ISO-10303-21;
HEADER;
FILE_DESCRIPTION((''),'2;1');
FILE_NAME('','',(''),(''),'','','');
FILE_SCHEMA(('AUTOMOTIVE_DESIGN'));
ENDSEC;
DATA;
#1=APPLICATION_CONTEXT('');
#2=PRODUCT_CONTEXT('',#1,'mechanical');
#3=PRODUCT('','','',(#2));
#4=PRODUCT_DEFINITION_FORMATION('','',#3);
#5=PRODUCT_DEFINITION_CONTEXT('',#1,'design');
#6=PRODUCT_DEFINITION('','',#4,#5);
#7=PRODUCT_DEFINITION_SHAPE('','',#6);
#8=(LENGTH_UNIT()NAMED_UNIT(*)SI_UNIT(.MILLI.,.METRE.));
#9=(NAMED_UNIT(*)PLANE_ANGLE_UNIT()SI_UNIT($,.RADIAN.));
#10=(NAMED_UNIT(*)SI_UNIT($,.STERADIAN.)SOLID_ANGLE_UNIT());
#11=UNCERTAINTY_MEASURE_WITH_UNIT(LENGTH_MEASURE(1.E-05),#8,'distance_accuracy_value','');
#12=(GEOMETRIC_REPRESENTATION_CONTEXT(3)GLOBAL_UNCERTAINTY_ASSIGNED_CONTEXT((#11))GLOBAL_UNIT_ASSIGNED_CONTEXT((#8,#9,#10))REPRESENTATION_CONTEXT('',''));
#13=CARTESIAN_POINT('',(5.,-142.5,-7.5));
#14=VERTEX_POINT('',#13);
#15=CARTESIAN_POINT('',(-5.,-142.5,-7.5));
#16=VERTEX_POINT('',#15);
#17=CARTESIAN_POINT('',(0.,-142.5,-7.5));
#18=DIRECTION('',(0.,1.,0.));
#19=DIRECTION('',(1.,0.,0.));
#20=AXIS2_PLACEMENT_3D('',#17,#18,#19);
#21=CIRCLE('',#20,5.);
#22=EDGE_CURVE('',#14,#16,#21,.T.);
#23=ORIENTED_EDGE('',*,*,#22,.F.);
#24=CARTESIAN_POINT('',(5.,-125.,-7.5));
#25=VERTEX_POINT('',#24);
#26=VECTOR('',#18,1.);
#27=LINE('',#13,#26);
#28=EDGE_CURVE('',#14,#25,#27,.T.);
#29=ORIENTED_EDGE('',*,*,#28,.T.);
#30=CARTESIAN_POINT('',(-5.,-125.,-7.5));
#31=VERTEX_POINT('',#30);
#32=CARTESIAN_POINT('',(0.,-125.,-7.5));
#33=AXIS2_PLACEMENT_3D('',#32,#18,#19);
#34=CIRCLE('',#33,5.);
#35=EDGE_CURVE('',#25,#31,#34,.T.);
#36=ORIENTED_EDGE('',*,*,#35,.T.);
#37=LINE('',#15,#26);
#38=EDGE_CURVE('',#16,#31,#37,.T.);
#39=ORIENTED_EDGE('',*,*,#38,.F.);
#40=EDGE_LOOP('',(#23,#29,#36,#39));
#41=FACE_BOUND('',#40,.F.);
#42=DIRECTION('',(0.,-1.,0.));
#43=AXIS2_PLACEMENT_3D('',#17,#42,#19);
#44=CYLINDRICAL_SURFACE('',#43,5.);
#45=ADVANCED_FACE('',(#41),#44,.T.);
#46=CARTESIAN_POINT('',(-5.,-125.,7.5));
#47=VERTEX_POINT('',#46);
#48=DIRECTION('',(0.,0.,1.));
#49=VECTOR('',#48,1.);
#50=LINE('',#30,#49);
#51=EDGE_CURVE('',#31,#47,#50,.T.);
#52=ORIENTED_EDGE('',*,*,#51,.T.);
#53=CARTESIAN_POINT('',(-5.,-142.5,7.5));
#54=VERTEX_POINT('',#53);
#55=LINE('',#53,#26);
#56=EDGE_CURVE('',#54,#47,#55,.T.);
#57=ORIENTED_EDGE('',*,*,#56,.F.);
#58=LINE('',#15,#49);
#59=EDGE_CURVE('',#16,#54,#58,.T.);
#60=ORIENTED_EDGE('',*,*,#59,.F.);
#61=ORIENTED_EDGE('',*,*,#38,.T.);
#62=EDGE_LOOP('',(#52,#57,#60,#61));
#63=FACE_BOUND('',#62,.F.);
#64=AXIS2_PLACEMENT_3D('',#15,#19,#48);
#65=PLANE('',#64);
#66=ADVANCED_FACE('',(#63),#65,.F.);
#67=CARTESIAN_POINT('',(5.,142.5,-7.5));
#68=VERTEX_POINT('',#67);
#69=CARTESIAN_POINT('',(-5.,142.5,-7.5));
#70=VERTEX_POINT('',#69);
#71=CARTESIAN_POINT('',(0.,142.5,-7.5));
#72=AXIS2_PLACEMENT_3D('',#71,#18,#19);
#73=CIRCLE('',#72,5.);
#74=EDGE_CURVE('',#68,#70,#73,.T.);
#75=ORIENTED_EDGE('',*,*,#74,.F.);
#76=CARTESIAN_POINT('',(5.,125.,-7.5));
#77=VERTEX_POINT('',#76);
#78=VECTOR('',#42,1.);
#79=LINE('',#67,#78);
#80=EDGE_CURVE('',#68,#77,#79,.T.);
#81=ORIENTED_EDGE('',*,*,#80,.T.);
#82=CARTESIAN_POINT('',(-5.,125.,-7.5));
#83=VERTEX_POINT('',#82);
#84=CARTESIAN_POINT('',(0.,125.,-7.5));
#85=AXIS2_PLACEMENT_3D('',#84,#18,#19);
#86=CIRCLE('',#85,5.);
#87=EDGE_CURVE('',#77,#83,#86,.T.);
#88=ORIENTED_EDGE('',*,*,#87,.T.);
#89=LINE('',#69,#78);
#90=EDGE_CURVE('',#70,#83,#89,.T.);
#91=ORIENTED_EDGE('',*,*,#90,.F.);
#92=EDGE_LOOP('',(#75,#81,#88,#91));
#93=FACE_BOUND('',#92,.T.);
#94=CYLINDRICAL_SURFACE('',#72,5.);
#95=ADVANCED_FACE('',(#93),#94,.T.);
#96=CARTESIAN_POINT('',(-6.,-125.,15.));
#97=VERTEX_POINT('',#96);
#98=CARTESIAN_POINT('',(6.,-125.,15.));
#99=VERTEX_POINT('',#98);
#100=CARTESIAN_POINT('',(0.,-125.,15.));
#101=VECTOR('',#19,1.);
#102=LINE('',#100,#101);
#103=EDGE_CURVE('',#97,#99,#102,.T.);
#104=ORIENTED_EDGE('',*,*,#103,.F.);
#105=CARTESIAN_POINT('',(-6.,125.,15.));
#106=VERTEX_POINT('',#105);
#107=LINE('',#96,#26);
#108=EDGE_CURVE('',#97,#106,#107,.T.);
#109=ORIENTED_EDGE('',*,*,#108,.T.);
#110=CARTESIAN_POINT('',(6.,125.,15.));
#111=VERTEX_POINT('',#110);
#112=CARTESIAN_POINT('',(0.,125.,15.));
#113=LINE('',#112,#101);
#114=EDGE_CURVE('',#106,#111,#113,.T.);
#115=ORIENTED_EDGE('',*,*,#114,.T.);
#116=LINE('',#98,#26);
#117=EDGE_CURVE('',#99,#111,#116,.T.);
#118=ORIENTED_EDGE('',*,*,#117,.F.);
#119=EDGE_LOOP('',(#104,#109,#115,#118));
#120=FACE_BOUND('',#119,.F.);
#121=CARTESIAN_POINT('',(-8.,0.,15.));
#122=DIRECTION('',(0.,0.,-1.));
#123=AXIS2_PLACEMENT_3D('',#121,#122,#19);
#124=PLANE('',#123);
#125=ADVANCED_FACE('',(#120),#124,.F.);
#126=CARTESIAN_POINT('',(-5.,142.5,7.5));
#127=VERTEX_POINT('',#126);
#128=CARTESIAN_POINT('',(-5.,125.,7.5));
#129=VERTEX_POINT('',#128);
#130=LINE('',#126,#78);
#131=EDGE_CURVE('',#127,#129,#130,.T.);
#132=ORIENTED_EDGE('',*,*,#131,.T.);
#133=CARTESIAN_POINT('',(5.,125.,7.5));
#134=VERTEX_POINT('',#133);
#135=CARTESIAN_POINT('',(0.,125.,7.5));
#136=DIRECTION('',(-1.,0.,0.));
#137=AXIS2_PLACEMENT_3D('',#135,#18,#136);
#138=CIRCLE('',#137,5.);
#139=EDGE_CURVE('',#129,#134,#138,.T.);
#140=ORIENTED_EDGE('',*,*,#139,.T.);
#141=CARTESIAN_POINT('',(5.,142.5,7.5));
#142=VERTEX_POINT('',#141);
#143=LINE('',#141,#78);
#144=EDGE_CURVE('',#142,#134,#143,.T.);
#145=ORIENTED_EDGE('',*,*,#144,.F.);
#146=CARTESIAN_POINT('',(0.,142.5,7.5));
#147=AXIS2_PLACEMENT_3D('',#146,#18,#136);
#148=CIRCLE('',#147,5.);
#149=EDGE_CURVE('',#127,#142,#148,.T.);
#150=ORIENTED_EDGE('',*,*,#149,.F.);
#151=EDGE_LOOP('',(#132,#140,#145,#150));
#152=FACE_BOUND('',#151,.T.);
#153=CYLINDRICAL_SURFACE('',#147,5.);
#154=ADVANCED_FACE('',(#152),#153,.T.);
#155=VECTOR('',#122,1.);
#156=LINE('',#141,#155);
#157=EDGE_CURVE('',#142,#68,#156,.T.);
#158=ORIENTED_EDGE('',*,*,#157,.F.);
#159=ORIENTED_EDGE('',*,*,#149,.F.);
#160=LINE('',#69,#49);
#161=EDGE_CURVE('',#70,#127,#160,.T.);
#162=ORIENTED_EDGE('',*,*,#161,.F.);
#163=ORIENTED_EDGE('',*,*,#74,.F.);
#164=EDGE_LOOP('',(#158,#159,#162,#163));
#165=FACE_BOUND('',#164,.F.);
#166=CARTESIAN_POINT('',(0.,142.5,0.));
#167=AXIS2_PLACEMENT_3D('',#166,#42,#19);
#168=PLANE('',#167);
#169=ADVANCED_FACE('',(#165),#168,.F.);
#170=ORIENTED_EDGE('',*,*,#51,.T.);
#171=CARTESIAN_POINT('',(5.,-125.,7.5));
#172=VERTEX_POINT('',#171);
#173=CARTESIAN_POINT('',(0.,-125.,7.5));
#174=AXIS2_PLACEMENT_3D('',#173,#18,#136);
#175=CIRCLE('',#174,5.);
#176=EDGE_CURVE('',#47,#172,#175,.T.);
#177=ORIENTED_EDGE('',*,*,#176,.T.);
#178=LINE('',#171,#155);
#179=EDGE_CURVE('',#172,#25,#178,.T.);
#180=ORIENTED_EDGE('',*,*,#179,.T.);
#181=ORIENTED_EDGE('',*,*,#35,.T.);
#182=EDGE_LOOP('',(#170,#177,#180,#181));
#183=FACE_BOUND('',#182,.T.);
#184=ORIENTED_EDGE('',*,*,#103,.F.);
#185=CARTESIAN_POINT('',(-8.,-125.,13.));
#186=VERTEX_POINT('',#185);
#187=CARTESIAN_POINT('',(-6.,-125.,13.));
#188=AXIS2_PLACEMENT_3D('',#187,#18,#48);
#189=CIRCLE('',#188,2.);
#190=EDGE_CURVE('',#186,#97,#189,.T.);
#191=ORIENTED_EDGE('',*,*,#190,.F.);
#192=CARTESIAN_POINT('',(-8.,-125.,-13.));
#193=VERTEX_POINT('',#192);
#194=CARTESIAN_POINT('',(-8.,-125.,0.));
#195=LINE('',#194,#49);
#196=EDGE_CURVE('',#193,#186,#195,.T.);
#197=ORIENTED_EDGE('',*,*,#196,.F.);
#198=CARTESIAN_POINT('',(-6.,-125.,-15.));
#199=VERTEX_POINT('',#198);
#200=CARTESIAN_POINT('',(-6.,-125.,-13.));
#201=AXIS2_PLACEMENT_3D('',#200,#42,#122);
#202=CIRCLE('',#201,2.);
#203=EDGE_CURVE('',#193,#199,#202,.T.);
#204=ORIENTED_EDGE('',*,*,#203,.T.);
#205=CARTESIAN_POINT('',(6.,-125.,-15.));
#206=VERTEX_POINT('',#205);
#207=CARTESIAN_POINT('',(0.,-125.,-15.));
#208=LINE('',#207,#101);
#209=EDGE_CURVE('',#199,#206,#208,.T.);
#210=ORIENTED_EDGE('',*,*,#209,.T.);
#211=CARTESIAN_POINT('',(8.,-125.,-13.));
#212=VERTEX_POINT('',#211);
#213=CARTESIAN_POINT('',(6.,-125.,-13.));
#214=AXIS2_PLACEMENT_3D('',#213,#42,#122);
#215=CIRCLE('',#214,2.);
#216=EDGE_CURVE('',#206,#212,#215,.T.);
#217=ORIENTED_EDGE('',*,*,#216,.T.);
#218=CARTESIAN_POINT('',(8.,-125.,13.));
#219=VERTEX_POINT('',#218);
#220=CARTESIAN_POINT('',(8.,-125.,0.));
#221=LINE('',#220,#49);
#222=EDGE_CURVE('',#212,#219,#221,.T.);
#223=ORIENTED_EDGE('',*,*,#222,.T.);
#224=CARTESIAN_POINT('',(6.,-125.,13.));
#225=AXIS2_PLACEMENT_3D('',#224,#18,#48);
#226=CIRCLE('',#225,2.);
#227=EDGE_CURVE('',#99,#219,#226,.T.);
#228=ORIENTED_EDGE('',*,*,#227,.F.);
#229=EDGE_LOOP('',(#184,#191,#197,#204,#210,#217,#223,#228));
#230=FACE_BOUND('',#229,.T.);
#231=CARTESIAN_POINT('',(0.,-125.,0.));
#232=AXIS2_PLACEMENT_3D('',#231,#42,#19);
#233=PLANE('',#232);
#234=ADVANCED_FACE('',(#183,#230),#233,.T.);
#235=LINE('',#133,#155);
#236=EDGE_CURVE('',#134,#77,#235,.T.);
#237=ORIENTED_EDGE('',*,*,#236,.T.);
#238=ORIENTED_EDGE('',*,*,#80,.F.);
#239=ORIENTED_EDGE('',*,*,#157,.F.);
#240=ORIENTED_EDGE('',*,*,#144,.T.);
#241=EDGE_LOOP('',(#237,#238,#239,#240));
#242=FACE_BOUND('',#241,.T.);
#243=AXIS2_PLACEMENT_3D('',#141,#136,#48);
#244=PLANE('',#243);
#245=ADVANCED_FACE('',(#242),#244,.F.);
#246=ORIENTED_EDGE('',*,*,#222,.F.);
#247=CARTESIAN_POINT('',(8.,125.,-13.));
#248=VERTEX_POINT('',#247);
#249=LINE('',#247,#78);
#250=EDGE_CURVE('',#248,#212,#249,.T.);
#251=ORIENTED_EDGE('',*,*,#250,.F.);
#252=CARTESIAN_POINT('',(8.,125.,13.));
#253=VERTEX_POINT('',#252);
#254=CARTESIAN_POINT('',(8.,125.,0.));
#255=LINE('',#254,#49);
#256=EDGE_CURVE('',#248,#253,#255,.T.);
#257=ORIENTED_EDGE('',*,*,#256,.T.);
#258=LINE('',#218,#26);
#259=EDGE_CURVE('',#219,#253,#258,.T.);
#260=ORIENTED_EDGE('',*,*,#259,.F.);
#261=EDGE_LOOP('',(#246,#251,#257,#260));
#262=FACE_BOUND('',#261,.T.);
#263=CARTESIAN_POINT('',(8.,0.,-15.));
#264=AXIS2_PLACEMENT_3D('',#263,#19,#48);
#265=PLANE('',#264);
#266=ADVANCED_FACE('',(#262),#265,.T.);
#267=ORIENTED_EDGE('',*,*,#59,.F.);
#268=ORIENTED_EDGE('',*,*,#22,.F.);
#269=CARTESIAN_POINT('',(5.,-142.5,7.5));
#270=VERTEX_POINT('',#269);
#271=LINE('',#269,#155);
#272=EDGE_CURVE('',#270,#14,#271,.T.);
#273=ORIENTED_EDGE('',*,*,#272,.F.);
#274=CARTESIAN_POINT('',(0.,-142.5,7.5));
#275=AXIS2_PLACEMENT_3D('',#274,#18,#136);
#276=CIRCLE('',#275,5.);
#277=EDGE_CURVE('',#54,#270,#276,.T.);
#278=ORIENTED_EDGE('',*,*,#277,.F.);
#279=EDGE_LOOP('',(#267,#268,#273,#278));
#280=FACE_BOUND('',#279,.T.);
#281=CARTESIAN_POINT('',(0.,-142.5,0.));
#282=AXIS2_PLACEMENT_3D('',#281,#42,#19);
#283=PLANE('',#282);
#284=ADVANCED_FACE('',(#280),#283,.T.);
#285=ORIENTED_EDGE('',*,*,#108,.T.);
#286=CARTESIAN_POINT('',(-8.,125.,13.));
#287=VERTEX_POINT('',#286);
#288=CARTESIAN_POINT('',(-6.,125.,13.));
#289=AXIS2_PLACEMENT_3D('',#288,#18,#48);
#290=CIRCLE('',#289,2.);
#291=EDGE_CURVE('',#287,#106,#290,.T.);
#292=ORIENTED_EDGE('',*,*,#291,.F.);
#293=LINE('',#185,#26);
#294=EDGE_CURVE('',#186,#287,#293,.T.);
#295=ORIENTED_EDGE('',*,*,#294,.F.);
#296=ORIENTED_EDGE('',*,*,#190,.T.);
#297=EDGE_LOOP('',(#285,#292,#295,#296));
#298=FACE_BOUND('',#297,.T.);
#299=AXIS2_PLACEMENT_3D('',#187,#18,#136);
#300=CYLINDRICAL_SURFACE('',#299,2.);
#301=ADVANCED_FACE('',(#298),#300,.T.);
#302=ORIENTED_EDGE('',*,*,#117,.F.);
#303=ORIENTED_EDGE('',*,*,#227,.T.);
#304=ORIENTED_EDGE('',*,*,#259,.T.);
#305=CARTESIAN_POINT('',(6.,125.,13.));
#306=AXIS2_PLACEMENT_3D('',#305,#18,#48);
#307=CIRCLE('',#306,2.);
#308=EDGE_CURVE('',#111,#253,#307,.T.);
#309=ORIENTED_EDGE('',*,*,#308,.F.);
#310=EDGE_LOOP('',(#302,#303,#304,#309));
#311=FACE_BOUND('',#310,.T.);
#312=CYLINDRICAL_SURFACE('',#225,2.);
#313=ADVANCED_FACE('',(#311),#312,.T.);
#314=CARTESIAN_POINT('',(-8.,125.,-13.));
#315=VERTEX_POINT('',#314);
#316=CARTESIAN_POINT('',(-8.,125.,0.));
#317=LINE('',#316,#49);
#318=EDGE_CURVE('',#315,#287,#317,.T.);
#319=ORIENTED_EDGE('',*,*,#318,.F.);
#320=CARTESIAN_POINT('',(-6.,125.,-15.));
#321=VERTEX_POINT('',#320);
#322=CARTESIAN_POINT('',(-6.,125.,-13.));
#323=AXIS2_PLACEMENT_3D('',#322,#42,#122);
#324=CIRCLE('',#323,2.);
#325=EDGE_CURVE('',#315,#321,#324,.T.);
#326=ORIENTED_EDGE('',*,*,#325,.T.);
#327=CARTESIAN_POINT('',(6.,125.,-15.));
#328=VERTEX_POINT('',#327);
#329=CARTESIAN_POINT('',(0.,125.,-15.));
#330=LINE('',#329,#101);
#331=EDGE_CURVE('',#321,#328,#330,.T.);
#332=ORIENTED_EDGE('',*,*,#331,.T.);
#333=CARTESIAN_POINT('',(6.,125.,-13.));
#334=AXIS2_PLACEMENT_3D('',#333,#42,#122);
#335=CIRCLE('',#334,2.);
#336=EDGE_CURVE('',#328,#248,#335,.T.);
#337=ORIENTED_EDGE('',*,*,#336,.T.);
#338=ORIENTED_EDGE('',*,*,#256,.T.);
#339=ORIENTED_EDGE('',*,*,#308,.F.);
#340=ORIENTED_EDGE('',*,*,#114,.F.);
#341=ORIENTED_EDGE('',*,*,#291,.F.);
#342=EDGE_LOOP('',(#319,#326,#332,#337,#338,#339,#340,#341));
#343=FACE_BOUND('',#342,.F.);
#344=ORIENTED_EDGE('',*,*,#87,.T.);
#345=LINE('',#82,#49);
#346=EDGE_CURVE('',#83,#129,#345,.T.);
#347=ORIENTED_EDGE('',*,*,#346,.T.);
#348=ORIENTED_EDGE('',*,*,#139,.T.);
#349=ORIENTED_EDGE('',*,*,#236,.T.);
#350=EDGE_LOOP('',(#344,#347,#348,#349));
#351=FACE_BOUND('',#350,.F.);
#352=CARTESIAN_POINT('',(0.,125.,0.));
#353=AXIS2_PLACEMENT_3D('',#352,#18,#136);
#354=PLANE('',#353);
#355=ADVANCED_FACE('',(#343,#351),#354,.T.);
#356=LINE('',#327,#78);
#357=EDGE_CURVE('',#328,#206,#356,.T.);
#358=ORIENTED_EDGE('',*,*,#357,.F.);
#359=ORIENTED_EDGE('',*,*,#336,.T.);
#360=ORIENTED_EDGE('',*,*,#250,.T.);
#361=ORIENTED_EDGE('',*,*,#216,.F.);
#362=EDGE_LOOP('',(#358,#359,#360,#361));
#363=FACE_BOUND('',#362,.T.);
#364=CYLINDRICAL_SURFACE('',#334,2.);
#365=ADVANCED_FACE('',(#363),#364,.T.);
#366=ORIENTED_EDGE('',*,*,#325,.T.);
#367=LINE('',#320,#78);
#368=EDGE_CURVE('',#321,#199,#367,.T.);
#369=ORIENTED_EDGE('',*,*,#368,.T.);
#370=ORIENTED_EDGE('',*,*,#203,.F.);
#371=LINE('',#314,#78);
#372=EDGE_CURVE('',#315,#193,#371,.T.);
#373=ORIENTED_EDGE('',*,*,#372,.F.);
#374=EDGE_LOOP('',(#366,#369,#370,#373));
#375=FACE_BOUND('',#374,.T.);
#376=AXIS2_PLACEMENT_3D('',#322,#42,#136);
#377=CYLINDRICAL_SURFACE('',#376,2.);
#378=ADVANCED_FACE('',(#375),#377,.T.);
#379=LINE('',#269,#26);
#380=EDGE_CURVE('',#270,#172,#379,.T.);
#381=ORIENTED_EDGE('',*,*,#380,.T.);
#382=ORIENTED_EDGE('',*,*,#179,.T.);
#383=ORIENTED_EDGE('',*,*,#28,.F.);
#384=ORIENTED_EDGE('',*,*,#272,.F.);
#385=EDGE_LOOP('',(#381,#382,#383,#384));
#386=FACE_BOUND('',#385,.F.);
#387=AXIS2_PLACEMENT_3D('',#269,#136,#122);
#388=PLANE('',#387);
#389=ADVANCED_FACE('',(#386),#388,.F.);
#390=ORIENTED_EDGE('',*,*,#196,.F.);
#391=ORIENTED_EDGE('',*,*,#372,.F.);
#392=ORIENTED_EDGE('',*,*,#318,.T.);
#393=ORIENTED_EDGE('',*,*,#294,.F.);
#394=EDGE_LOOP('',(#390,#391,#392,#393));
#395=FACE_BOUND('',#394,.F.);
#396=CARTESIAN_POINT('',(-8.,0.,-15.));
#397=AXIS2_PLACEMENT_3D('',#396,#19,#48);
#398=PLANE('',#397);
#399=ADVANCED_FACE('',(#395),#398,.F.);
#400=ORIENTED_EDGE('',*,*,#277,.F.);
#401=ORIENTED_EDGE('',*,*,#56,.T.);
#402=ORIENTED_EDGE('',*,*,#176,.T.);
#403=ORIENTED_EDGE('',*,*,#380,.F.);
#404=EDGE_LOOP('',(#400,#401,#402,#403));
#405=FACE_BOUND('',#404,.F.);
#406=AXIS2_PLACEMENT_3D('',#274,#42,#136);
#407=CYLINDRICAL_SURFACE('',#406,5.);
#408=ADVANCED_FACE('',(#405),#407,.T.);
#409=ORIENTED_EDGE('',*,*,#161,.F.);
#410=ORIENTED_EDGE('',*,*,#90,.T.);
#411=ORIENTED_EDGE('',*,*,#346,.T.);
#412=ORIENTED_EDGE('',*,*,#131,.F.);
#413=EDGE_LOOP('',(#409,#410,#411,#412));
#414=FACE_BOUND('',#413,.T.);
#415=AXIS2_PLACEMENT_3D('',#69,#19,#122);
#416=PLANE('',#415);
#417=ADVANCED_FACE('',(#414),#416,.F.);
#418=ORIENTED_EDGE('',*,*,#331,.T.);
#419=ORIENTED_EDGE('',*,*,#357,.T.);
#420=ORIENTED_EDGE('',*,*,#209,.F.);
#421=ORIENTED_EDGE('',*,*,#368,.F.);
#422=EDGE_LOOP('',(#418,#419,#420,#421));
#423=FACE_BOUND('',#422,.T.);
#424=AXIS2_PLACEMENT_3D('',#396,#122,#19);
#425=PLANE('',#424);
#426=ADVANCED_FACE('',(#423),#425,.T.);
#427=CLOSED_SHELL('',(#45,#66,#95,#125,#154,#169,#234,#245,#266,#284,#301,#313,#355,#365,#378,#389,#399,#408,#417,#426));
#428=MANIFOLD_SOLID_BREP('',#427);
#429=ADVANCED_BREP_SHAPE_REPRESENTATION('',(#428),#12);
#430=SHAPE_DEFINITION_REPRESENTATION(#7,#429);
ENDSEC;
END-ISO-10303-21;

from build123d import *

# Parameters (mm, degrees)
F0_W          = 16
F0_H          = 30
F1_DEPTH      = 142.5
F1_DEPTH_BACK = 142.5
F2_W          = 16
F2_H          = 30
F3_DEPTH      = 17.5
F4_R          = 2


# Not quite as in the source:
# - a pattern or mirror of a feature is missing from the dataset's text; its kind, count and spacing are read off the source's solid


with BuildPart() as f1:
    # F0 (on Front) → F1 (new body, two sides)
    with BuildSketch(Plane.XZ) as f1_sk:
        Rectangle(F0_W, F0_H)
    extrude(amount=F1_DEPTH)
    extrude(f1_sk.sketch, amount=-F1_DEPTH_BACK)

    # F2 (on face) → F3 (cut)
    with BuildSketch(Plane.XZ.offset(142.5)):
        Rectangle(F2_W, F2_H)
        with BuildLine():
            ThreePointArc((5, -7.5), (0, -12.5), (-5, -7.5))
            Line((-5, -7.5), (-5, 7.5))
            ThreePointArc((-5, 7.5), (0, 12.5), (5, 7.5))
            Line((5, 7.5), (5, -7.5))
        make_face(mode=Mode.SUBTRACT)
    f3 = extrude(amount=-F3_DEPTH, mode=Mode.SUBTRACT)

    # F3_copies: F3 across plane
    add(f3.mirror(Plane.ZX), mode=Mode.SUBTRACT)

    # F4
    f4_edges = [f1.edges().sort_by_distance(p)[0] for p in [
        (-8, 0, 15),
        (8, 0, 15),
        (8, 0, -15),
        (-8, 0, -15),
    ]]
    fillet(f4_edges, radius=F4_R)


solid = f1.part
